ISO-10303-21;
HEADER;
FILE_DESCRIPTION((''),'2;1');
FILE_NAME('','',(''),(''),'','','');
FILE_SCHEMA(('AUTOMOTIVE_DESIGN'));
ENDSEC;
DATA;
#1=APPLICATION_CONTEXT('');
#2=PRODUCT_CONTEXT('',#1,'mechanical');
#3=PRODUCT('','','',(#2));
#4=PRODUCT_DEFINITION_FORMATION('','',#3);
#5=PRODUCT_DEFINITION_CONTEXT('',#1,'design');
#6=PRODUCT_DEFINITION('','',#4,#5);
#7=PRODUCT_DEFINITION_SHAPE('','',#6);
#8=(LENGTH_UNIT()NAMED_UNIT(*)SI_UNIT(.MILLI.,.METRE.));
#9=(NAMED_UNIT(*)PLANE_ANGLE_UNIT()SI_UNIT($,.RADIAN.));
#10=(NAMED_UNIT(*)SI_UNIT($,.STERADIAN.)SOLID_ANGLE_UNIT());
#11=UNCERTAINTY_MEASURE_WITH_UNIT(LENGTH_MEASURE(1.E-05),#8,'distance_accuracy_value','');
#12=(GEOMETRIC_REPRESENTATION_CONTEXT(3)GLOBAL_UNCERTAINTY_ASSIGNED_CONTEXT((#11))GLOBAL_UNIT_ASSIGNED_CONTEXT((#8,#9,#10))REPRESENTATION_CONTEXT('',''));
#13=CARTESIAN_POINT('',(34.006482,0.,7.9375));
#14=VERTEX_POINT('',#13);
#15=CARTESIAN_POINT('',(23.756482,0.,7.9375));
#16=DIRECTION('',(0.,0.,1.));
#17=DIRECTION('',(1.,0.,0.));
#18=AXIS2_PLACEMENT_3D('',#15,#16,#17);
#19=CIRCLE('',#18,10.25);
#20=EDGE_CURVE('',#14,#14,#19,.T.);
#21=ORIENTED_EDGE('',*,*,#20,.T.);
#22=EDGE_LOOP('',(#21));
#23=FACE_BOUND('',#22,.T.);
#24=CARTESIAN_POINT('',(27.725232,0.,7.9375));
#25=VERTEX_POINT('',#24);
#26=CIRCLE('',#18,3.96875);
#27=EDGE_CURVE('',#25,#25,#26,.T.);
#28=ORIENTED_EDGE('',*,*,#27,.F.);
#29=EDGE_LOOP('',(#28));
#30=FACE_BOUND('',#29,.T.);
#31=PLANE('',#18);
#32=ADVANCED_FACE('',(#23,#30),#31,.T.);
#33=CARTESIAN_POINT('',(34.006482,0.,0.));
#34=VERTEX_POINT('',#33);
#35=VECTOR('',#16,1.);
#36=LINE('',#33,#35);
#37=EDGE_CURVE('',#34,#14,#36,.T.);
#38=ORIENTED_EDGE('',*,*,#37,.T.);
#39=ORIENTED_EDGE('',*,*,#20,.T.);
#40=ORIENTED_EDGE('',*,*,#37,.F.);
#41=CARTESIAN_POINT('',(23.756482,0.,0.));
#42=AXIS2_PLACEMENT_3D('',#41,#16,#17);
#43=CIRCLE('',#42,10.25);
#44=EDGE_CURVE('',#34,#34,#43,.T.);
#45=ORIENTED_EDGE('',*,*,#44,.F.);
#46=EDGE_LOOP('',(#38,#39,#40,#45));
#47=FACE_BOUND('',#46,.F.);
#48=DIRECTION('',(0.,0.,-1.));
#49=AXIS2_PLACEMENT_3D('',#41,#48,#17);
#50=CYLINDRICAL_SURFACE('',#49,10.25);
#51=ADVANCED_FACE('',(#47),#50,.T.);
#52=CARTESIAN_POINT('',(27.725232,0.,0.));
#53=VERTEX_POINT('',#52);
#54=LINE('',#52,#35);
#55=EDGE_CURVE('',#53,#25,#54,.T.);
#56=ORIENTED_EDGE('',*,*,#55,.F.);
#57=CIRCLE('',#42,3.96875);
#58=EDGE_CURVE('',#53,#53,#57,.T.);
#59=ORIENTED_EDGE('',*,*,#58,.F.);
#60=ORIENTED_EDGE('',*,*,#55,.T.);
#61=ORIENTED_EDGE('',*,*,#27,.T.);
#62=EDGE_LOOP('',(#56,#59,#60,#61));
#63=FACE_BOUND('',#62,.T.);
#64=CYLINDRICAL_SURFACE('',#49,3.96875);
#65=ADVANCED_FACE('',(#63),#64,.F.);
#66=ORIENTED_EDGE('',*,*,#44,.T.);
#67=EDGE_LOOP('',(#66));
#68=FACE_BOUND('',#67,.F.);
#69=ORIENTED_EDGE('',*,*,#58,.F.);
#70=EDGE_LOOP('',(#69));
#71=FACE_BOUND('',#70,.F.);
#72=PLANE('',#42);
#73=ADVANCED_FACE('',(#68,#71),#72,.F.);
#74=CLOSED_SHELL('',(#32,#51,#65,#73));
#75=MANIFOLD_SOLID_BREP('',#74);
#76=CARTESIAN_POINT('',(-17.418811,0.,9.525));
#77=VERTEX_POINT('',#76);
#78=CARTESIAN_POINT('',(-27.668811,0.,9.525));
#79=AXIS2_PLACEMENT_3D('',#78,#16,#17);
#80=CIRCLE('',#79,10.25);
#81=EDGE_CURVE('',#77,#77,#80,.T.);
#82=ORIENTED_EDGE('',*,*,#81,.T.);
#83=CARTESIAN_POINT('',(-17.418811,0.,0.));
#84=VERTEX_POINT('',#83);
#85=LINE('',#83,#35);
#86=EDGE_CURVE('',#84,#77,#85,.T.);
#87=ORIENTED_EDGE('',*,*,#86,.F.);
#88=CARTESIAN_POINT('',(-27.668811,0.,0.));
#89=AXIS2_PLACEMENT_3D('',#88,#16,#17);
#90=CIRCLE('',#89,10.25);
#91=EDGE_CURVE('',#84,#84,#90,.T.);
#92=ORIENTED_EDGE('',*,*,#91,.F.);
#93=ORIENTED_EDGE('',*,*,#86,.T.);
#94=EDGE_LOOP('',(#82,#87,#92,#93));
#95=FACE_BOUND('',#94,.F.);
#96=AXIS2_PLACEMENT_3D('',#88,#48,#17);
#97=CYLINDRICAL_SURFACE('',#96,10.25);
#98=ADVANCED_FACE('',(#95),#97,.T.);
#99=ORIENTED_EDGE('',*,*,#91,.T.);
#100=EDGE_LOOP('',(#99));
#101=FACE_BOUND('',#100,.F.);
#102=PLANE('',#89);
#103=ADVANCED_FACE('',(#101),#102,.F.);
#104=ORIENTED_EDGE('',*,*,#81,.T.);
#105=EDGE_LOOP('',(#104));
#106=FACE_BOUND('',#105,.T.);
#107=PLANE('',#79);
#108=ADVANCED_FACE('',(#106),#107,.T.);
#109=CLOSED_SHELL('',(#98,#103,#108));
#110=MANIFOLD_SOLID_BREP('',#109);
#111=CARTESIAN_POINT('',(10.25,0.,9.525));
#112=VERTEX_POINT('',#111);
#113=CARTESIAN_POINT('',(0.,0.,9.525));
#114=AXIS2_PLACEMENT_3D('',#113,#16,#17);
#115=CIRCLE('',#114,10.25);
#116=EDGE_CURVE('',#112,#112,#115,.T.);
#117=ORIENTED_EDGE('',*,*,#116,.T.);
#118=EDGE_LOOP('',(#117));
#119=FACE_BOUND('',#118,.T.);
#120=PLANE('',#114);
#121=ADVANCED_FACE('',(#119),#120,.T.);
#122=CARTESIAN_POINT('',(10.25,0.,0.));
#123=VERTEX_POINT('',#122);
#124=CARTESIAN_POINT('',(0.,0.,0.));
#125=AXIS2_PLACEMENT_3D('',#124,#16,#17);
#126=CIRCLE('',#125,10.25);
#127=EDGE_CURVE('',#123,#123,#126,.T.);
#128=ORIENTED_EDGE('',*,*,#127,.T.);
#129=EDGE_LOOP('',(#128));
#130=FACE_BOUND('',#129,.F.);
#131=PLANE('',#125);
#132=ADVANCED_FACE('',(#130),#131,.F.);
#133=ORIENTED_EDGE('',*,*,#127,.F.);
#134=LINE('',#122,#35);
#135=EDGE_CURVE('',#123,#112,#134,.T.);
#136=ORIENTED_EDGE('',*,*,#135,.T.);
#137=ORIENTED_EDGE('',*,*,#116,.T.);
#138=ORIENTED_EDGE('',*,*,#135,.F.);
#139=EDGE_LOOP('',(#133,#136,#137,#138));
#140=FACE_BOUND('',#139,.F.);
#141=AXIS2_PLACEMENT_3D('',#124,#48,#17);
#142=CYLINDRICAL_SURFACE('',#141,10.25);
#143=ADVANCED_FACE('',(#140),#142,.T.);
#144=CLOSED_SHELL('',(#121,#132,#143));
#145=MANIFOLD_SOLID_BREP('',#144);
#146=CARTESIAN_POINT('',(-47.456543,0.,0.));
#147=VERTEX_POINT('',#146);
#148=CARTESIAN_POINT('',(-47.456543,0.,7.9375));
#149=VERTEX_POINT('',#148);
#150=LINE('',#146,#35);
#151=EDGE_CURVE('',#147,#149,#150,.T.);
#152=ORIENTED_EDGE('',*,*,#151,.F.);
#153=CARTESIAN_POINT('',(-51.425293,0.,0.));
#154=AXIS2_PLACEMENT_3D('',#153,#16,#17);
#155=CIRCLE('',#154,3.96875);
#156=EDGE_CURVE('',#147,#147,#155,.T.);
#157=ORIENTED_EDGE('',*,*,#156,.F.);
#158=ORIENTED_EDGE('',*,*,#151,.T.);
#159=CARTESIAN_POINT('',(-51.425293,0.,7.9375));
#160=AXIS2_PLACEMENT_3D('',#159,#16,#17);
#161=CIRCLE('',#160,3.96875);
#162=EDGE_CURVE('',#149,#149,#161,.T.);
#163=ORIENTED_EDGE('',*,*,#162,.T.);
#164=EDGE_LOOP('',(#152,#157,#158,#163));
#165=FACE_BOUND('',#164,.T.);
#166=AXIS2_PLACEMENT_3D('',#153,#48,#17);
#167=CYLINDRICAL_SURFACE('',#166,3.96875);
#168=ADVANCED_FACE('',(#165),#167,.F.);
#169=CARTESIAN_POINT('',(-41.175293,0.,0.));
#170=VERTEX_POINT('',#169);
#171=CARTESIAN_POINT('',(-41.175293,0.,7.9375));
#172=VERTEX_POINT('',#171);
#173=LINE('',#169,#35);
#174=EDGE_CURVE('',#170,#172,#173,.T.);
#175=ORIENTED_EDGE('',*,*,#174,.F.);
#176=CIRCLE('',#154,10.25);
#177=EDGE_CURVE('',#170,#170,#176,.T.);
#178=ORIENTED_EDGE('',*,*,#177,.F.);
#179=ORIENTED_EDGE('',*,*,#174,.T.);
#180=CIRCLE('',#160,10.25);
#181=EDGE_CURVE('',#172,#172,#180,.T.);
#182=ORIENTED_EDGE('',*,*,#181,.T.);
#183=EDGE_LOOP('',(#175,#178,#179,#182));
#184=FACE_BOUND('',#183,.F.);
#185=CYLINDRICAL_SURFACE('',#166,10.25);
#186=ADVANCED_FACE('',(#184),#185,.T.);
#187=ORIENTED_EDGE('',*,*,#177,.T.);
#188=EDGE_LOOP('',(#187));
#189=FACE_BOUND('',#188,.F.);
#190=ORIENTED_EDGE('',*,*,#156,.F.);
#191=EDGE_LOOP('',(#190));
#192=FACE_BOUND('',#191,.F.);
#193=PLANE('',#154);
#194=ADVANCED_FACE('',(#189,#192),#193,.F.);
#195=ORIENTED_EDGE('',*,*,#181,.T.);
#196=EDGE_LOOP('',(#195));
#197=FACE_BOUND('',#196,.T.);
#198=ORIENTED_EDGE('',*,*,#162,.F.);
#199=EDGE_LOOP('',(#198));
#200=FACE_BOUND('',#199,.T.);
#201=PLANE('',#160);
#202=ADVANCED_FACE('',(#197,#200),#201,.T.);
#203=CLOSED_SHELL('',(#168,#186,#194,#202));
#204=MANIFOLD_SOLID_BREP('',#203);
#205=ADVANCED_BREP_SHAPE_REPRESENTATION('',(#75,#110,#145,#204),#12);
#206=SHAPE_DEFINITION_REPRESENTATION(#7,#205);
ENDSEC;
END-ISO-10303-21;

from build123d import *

# Parameters (mm, degrees)
F0_R     = 10.25
F1_DEPTH = 9.525
F0_R_2   = 3.96875
F2_DEPTH = 7.9375


# Not quite as in the source:
# - a length typed as a fraction of an inch, garbled in the dataset ("3 / 203.2 mm" for 3/8 in), is restored
# - a feature names something its author has since deleted; it is built from what else it names


with BuildPart() as f1:
    # F0 (on Top) → F1 (new body)
    with BuildSketch(Plane.XY):
        Circle(F0_R)
    extrude(amount=F1_DEPTH)


with BuildPart() as f1b:
    # F0 (on Top) → F1, piece 2 (new body)
    with BuildSketch(Plane.XY):
        with Locations((-27.6688113809, 0)):
            Circle(F0_R)
    extrude(amount=F1_DEPTH)


with BuildPart() as f2:
    # F0 (on Top) → F2 (new body)
    with BuildSketch(Plane.XY):
        with Locations((-51.425293088, 0)):
            Circle(F0_R)
        with Locations((-51.425293088, 0)):
            Circle(F0_R_2, mode=Mode.SUBTRACT)
    extrude(amount=F2_DEPTH)


with BuildPart() as f2b:
    # F0 (on Top) → F2, piece 2 (new body)
    with BuildSketch(Plane.XY):
        with Locations((23.7564817071, 0)):
            Circle(F0_R)
        with Locations((23.7564817071, 0)):
            Circle(F0_R_2, mode=Mode.SUBTRACT)
    extrude(amount=F2_DEPTH)


solid = Compound([f1.part, f1b.part, f2.part, f2b.part])
